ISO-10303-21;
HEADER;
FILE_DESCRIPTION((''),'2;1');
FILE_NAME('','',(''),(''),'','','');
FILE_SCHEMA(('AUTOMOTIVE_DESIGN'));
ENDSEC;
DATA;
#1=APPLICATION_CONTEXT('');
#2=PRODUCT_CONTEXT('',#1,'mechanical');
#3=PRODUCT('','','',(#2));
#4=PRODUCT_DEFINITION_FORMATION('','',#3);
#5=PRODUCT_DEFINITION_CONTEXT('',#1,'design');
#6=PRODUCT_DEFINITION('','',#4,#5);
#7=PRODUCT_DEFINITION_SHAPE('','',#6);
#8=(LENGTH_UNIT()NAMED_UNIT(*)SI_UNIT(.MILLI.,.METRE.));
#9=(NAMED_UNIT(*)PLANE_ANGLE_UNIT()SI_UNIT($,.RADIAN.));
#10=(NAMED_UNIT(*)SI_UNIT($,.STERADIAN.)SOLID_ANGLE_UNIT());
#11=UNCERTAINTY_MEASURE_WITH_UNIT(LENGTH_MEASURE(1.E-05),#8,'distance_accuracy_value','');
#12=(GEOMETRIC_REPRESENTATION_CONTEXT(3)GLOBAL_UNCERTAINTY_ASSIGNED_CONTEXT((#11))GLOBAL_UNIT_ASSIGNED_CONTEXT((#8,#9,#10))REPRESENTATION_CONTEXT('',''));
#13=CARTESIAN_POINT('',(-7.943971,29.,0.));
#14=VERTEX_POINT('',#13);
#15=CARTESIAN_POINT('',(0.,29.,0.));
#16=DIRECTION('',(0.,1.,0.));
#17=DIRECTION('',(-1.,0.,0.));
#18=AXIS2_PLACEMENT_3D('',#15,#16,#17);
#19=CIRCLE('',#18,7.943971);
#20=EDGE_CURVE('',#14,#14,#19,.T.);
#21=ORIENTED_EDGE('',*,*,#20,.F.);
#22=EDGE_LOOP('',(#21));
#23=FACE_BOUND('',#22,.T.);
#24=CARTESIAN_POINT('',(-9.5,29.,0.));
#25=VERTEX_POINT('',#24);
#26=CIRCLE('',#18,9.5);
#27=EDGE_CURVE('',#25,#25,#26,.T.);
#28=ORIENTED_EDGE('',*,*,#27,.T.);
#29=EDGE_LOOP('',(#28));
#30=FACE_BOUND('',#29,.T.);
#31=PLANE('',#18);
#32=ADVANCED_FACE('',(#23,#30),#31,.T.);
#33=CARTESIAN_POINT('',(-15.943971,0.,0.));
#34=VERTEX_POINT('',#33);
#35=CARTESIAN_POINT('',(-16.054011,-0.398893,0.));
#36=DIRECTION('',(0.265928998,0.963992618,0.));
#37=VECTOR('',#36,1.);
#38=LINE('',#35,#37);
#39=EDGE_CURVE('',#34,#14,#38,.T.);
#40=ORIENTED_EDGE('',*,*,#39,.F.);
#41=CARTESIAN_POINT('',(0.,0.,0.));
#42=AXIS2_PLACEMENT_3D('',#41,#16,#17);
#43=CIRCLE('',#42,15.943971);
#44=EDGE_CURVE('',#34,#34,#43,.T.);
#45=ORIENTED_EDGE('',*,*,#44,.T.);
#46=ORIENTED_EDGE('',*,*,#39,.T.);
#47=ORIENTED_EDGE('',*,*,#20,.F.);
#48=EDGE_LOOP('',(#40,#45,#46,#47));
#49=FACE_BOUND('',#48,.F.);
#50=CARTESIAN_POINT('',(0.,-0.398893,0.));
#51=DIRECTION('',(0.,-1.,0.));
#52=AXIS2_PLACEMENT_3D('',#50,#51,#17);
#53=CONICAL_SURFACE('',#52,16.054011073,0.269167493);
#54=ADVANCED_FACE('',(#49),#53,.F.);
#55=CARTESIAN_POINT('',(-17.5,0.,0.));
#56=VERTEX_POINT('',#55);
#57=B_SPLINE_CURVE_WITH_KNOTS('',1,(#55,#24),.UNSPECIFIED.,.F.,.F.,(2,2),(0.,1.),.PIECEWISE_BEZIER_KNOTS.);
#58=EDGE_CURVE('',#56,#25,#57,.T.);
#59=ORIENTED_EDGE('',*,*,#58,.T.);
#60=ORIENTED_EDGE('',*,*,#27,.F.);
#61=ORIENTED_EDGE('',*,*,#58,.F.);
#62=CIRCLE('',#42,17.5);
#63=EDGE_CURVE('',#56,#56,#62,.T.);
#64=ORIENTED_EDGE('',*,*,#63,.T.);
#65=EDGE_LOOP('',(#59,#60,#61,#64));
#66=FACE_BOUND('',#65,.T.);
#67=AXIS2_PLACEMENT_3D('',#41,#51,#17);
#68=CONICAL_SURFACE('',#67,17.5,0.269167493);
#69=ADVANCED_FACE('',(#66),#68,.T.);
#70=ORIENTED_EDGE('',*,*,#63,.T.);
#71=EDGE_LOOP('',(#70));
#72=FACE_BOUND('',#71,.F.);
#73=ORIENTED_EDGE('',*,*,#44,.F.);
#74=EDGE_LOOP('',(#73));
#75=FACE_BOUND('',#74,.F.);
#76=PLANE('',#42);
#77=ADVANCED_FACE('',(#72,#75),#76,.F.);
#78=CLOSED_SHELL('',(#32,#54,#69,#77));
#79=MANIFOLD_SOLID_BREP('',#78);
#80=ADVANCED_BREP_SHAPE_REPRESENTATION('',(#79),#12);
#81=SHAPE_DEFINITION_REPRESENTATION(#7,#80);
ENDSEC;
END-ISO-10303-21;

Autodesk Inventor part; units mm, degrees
ref_plane "YZ Plane" through (0, 0, 0) normal (1, 0, 0) x (0, 1, 0)
ref_plane "XY Plane" through (0, 0, 0) normal (0, 0, 1) x (1, 0, 0)
sketch "Szkic6" plane through (0, 0, 0) normal (0, 1, 0) x (-1, 0, 0)
  circle A0 centre (0, 0) radius 17.5
  dimension "d33" = 35
ref_plane "Płaszczyzna konstrukcyjna1" through (0, 29, 0) normal (0, 1, 0) x (-1, 0, 0)
sketch "Szkic7" plane through (0, 29, 0) normal (0, 1, 0) x (-1, 0, 0)
  circle A0 centre (0, 0) radius 9.5
  dimension "d35" = 19
loft "Wyciągnięcie złożone1" add profiles "Szkic6", "Szkic7"
shell "Skorupa1" thickness 1.5 removed faces 2 at (0.3595, 29, 2.9609) at (-4.3663, 0, -1.0762)
equation "\"d33\" = OD1"
equation "\"d35\" = OD2"
equation "\"d52\" = THK"
equation "\"SzerokośćGięciaPodcięcia\" = Grubość"
equation "\"RozmiarPodcięciaNarożnika\" = 4 * Grubość"
equation "\"PromieńPrzejścia\" = PromieńGięcia"
equation "\"Rozmiar_promienia_Jacobiego\" = PromieńGięcia"
equation "\"Wielk_odstępu\" = Grubość"
equation "\"d2\" = PromieńGięcia"
equation "\"d23\" = PromieńGięcia"
equation "\"OD1\" = 35"
equation "\"OD2\" = 19"
equation "\"L\" = 29"
equation "\"THK\" = 1.5"
equation "\"d34\" = L"
equation "\"Grubość\" = 1.5"
equation "\"PromieńGięcia\" = 3"
properties part number "Redukcja symetryczna Ø35x19x1,5 L=29" material "304"
